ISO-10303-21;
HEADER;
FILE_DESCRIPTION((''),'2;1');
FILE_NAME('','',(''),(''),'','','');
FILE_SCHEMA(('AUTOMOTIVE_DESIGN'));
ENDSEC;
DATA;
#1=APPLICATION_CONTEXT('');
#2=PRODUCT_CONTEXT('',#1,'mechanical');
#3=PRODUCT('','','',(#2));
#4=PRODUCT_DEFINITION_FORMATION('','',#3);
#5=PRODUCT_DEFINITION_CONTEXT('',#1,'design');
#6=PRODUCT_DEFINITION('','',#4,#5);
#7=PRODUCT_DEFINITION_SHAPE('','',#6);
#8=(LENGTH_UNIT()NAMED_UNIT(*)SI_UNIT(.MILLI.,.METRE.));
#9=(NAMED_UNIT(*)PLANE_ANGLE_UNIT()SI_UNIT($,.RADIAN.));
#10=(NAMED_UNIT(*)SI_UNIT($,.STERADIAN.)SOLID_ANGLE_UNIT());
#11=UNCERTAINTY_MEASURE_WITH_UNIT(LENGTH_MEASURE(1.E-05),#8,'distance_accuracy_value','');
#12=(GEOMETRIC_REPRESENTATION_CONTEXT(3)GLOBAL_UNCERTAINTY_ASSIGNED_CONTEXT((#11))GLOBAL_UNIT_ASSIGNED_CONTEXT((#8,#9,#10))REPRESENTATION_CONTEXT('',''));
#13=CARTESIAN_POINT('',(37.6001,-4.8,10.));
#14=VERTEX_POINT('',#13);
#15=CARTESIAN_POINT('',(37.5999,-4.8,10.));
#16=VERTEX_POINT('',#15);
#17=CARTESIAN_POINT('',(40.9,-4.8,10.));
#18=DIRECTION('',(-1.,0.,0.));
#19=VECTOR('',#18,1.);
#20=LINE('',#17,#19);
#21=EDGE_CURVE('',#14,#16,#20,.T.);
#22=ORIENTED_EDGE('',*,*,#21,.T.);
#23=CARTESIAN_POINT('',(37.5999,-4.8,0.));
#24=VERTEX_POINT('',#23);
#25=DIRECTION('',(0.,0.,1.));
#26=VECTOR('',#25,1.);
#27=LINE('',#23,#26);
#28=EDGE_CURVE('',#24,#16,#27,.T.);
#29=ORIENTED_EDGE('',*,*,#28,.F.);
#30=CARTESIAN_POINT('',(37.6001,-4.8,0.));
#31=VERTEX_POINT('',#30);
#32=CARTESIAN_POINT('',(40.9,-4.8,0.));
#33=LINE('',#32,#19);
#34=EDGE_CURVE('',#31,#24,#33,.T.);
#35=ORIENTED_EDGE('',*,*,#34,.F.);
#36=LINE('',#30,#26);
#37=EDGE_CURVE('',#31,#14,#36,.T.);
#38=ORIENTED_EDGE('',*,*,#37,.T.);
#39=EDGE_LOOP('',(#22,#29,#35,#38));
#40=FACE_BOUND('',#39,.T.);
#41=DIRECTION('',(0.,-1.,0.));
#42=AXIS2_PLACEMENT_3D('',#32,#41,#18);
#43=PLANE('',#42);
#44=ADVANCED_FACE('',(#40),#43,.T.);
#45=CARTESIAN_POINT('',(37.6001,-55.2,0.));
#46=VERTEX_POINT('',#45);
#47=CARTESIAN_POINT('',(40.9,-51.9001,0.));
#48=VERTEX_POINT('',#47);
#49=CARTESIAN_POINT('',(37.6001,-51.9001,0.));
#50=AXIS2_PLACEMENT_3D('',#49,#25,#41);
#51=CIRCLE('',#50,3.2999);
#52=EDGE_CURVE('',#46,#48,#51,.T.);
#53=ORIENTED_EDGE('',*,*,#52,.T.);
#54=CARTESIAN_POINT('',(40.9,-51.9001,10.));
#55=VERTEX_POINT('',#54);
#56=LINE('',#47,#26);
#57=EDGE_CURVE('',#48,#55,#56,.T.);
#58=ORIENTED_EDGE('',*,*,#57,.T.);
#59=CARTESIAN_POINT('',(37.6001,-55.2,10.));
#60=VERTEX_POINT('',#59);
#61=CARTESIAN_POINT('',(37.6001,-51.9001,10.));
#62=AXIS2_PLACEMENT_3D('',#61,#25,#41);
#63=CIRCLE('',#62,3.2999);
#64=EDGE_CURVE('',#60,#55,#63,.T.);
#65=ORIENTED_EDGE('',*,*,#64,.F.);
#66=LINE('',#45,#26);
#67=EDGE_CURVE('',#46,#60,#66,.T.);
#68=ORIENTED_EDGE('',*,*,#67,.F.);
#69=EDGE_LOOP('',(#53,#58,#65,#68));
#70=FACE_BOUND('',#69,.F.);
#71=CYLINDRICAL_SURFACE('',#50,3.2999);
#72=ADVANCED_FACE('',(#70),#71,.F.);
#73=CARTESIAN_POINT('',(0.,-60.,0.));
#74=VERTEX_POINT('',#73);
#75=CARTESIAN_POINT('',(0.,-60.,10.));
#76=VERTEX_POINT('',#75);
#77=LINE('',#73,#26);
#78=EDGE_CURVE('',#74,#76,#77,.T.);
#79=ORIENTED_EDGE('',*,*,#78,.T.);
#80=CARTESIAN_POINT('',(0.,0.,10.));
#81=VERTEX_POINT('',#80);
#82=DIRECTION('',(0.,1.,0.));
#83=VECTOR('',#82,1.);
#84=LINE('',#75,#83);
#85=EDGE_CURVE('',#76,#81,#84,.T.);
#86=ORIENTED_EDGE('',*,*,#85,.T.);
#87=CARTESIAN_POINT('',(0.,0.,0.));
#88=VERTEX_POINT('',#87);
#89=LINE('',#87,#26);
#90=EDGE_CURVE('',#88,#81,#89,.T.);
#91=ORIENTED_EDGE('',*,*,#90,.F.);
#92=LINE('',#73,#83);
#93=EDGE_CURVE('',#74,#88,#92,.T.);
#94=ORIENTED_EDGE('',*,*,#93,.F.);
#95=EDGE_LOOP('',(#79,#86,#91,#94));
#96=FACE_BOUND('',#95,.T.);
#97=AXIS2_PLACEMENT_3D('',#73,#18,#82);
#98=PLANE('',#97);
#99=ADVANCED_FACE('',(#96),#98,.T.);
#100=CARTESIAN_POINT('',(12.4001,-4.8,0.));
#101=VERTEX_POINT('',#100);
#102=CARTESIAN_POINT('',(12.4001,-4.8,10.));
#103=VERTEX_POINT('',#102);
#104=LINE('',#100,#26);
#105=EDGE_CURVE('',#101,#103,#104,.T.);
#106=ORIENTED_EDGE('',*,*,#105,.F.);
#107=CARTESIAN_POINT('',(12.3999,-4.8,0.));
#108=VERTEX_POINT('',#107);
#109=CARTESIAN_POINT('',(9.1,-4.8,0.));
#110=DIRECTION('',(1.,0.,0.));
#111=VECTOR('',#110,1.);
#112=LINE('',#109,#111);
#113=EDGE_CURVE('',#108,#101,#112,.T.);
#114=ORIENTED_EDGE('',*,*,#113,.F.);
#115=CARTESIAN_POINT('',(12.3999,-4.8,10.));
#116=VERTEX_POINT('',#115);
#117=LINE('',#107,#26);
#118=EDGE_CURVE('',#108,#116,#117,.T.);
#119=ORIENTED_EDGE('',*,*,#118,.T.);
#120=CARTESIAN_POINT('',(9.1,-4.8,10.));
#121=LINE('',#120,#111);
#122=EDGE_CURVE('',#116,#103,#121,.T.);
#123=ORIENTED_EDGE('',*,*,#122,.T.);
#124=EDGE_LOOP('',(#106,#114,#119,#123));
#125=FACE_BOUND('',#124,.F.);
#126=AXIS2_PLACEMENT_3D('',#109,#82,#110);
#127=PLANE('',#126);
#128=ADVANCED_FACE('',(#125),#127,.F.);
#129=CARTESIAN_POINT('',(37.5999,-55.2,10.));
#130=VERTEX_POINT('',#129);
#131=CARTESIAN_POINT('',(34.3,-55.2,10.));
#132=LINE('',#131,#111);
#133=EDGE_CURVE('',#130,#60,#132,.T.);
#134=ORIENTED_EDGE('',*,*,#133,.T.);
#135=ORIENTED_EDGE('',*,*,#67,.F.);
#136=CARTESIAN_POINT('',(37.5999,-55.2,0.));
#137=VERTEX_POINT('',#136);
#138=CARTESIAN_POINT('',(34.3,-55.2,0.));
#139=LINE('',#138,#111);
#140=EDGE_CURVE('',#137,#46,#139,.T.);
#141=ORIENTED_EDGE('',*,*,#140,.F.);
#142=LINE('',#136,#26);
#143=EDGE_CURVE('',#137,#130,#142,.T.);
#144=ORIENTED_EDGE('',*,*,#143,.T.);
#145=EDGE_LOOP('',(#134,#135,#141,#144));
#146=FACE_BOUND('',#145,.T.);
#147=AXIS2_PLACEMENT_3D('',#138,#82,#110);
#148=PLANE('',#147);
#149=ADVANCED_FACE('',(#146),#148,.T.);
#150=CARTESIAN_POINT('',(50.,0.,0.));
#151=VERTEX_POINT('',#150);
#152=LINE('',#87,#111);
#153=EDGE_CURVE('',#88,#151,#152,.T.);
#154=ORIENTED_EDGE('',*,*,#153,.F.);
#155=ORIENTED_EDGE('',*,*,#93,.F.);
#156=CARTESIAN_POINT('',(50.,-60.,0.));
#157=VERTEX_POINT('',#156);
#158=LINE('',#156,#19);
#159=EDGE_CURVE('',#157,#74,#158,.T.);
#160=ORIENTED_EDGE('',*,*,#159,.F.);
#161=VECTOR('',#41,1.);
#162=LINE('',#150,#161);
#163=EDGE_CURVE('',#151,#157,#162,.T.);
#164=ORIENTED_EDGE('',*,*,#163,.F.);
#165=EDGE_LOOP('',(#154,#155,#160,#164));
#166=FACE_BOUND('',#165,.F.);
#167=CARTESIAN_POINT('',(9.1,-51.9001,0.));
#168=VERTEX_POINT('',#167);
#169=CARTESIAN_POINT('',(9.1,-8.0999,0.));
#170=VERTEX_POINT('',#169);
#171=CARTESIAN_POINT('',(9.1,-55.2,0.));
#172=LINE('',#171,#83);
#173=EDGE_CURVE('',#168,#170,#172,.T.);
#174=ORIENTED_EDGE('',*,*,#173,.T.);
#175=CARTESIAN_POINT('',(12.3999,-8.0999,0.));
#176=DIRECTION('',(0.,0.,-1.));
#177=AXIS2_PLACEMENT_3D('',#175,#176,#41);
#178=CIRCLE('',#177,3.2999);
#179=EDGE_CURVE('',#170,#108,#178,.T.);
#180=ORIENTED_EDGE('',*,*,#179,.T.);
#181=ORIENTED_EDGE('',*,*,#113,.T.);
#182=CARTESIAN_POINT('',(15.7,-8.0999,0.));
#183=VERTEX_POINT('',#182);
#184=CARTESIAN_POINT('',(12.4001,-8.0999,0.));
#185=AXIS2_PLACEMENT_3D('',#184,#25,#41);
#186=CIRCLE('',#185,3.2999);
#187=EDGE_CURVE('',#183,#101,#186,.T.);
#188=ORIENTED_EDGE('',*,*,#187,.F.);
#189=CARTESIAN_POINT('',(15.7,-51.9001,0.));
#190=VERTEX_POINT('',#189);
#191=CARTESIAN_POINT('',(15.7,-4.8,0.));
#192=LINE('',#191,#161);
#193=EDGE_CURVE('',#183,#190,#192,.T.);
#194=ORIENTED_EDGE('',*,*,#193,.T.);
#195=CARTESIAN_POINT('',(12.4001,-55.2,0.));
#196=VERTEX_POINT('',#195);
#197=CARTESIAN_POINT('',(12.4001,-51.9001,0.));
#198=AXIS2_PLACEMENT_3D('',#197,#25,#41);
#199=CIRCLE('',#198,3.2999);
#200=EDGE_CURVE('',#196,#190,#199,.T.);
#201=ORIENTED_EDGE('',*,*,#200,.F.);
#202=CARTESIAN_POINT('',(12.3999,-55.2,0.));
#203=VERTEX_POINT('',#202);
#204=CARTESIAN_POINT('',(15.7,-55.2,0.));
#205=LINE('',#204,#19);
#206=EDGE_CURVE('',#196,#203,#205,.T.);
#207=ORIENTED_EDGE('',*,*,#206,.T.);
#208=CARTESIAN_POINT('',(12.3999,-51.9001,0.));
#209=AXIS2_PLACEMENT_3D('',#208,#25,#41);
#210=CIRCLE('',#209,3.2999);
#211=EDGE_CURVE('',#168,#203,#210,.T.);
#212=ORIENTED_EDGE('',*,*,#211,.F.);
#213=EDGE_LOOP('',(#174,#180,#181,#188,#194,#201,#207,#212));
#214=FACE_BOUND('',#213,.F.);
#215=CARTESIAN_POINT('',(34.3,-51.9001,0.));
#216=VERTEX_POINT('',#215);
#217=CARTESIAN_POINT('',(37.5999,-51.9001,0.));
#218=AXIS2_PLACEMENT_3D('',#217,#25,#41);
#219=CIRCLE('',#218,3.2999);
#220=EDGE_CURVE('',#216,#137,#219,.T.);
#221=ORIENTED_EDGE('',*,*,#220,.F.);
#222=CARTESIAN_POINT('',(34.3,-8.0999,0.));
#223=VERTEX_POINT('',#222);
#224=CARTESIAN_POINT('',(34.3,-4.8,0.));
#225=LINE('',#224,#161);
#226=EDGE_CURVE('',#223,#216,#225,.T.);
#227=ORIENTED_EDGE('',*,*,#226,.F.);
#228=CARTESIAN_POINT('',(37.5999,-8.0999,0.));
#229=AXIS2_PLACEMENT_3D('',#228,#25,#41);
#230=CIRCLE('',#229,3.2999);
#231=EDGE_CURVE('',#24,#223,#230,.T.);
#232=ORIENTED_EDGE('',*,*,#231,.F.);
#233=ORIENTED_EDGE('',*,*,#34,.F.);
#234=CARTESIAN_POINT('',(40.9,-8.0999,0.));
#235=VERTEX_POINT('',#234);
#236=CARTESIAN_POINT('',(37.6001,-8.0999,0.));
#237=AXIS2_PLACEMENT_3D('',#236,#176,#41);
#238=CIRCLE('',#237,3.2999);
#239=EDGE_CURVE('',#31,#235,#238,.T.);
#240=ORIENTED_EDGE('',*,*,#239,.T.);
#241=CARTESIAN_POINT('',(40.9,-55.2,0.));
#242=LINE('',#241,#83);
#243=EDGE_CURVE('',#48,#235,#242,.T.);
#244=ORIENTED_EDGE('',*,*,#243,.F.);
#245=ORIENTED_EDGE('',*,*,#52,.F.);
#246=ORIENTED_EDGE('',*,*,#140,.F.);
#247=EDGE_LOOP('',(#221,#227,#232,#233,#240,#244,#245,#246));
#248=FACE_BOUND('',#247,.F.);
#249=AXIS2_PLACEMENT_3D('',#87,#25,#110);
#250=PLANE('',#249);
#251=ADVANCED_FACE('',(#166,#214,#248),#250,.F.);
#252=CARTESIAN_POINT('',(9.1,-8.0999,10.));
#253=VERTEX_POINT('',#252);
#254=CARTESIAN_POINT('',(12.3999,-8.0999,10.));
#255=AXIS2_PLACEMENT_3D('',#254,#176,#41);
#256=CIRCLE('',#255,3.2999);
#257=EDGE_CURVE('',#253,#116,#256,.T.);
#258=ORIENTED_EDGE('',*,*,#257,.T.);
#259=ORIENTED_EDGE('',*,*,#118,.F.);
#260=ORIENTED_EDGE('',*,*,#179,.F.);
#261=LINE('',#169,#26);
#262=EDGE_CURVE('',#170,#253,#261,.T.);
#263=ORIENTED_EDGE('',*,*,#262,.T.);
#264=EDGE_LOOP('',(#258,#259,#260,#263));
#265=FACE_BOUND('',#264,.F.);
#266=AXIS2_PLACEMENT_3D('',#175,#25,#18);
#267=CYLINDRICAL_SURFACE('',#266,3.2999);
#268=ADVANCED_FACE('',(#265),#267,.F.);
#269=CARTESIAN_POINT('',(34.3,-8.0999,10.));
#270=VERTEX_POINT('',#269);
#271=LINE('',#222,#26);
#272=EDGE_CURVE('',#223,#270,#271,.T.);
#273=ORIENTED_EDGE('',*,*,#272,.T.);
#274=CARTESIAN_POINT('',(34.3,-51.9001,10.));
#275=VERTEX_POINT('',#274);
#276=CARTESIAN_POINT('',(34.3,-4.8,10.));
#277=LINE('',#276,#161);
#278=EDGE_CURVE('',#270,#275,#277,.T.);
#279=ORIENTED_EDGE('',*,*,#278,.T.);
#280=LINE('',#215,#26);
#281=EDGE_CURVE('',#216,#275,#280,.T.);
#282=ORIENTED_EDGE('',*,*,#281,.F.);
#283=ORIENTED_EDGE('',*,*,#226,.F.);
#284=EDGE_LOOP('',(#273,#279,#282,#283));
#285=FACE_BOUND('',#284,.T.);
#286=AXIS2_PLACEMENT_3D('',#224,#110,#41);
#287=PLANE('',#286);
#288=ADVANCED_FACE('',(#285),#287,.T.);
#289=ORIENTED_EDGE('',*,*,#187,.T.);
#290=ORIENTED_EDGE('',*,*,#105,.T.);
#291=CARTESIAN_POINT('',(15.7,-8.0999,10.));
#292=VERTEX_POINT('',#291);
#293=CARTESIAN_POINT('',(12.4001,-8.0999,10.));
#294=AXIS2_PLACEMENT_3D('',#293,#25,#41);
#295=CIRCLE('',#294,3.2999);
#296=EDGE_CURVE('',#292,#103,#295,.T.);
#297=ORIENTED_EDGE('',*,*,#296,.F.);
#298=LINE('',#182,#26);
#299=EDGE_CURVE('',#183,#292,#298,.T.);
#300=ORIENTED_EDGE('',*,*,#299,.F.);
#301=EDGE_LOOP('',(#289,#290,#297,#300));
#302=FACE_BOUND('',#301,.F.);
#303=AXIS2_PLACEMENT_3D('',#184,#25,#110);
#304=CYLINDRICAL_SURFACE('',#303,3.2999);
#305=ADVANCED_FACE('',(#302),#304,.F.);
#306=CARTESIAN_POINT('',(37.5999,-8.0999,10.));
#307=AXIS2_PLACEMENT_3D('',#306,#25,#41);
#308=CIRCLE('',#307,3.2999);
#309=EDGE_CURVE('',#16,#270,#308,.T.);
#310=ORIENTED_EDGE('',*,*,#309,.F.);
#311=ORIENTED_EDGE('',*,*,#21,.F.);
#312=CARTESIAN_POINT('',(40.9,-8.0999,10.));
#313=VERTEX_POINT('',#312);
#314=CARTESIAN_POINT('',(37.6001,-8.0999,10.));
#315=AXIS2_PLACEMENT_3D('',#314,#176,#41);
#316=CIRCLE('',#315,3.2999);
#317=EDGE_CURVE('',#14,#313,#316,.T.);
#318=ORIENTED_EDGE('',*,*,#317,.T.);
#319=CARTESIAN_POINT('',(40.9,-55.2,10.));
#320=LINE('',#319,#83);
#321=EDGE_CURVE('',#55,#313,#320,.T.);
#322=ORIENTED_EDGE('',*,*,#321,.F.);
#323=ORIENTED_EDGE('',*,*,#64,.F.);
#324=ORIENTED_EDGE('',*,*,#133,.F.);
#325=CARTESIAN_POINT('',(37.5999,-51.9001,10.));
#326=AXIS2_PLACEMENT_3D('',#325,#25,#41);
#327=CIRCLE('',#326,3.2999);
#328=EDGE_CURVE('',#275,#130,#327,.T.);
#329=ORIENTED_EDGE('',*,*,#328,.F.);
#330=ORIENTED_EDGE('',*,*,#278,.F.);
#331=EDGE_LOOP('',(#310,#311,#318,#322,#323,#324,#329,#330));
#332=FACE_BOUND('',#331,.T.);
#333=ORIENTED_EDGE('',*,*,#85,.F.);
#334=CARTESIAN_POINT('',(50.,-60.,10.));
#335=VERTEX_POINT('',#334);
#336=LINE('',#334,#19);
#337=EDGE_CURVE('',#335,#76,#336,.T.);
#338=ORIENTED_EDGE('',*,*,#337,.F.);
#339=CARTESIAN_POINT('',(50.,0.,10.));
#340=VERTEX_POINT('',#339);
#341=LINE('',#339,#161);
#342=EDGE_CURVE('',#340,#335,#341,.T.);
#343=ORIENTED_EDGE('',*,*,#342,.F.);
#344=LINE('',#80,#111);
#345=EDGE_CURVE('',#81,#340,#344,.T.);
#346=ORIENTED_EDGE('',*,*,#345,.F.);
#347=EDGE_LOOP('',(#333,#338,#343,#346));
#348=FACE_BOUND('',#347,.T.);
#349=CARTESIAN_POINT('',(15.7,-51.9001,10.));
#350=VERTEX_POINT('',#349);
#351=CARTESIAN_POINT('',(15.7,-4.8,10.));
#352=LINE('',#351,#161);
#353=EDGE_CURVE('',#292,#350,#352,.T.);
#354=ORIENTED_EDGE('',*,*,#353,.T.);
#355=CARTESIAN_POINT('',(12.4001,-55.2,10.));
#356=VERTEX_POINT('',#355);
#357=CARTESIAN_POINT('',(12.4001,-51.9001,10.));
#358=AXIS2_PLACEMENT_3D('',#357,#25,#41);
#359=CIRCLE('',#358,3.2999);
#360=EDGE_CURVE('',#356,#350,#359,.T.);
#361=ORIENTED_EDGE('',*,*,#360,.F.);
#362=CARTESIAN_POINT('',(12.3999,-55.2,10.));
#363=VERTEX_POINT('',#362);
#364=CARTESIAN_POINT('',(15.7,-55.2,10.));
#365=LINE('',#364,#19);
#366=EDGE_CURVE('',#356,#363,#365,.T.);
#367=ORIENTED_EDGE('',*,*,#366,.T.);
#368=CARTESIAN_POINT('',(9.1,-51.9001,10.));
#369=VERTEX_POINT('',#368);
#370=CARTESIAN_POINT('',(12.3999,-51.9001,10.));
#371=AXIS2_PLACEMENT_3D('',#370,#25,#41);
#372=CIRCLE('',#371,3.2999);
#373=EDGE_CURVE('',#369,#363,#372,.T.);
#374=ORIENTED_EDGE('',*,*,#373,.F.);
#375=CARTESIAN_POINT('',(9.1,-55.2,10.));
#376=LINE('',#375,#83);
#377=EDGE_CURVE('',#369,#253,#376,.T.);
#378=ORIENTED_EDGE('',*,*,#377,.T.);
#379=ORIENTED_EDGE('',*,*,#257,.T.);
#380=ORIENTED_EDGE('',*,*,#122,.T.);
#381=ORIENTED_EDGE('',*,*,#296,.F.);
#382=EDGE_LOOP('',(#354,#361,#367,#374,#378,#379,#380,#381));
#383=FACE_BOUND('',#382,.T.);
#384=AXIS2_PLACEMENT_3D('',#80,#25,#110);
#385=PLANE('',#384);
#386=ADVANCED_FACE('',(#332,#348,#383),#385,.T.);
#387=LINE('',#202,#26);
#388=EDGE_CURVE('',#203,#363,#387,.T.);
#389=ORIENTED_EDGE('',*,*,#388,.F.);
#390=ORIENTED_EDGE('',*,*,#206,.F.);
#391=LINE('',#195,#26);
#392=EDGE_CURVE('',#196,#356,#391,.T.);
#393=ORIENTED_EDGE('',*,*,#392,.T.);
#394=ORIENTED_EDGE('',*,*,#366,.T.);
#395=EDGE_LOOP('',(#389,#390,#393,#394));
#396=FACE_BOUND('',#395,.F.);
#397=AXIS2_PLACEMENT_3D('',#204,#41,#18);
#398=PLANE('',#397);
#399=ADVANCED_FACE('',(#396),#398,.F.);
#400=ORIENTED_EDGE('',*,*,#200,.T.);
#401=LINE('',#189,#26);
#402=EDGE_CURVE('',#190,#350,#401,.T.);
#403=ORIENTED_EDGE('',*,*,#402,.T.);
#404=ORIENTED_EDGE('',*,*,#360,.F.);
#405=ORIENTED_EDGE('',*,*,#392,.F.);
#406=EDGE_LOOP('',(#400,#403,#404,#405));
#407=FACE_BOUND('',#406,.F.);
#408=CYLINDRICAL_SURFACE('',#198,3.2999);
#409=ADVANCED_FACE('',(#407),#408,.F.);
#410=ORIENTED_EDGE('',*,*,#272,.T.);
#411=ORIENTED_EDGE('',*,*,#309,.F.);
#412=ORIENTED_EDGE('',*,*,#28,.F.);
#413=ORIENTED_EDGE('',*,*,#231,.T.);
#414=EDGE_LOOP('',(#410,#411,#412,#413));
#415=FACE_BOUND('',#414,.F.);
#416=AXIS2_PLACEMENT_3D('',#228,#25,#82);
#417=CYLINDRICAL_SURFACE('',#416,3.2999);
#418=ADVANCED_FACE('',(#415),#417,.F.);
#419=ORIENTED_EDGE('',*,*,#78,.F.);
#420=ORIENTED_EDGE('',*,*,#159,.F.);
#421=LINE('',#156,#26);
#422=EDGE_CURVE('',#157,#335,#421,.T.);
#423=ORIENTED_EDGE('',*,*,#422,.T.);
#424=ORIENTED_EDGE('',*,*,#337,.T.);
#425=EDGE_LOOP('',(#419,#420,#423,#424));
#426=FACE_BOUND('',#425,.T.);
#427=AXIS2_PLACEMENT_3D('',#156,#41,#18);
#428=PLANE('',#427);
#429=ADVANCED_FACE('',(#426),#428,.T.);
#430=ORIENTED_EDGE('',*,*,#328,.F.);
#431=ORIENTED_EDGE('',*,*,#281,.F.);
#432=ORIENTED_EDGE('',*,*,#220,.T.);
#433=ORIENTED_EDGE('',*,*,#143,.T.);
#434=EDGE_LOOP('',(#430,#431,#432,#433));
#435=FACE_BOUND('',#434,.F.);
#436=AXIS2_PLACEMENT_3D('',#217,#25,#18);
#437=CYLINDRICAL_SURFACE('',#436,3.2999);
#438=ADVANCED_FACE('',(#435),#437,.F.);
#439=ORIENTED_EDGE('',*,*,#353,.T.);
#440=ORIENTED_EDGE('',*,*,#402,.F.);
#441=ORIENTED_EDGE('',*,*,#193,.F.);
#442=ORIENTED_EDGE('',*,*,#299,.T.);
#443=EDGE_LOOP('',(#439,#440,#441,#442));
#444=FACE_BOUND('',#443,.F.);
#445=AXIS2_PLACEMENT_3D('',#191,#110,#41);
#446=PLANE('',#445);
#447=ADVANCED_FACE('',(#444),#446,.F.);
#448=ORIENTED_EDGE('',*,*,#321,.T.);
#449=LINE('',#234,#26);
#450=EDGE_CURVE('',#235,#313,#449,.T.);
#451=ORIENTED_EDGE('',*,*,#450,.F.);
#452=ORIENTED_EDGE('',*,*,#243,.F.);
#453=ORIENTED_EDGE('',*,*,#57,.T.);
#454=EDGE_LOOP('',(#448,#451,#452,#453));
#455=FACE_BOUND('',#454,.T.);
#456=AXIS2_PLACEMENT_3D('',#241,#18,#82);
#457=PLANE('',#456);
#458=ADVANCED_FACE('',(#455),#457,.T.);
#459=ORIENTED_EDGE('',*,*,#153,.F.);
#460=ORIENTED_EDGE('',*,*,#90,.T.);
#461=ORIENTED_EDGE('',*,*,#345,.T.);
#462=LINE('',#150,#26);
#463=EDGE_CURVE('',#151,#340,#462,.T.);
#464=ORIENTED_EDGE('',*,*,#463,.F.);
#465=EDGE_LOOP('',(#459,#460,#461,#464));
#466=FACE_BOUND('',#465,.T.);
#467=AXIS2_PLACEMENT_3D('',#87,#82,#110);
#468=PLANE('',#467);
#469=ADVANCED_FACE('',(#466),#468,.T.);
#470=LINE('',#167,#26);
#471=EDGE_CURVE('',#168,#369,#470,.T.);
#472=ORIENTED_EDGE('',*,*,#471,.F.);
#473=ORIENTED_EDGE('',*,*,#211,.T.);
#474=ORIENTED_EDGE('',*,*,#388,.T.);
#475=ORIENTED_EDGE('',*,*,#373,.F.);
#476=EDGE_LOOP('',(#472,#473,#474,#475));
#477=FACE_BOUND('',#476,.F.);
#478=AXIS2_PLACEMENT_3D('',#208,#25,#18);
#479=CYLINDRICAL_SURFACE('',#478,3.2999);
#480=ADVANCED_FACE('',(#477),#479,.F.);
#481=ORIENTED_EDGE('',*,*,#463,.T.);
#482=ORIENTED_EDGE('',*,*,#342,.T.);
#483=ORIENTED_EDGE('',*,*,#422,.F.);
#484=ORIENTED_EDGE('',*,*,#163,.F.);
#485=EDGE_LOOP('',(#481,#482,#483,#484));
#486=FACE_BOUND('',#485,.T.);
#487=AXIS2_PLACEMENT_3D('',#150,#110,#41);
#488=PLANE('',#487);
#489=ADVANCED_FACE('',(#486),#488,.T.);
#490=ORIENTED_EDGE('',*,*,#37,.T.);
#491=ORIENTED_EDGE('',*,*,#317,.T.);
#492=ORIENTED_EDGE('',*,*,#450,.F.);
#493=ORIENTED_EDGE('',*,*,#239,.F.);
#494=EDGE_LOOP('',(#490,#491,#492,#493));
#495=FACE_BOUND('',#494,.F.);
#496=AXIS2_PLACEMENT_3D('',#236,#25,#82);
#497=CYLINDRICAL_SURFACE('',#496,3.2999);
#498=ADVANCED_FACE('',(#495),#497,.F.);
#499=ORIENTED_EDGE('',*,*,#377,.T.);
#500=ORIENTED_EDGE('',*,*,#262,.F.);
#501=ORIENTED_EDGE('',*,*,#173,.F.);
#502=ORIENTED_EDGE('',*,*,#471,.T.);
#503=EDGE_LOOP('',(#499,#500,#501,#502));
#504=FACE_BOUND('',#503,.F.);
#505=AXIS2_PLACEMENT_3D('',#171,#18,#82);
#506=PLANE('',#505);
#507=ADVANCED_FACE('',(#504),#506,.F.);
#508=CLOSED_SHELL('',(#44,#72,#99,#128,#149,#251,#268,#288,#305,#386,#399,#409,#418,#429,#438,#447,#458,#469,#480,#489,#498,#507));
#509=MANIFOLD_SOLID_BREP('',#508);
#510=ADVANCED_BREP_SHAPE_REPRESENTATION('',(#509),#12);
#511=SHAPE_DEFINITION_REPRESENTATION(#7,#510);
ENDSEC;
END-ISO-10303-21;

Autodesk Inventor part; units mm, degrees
ref_plane "YZ Plane" through (0, 0, 0) normal (1, 0, 0) x (0, 1, 0)
ref_plane "XZ Plane" through (0, 0, 0) normal (0, 1, 0) x (-1, 0, 0)
ref_plane "XY Plane" through (0, 0, 0) normal (0, 0, 1) x (1, 0, 0)
sketch "Skizze3" plane through (0, 0, 0) normal (0, 0, 1) x (1, 0, 0)
  line L0 (0, 0) -> (50, 0)
  line L1 (0, 0) -> (50, 0)
  line L2 (50, 0) -> (50, -60)
  line L3 (50, -60) -> (0, -60)
  line L4 (0, -60) -> (0, 0)
  line L5 (40.9, -4.8) -> (34.3, -4.8)
  line L6 (34.3, -4.8) -> (34.3, -55.2)
  line L7 (34.3, -55.2) -> (40.9, -55.2)
  line L8 (40.9, -55.2) -> (40.9, -4.8)
  line L9 (9.1, -4.8) -> (15.7, -4.8)
  line L10 (15.7, -4.8) -> (15.7, -55.2)
  line L11 (15.7, -55.2) -> (9.1, -55.2)
  line L12 (9.1, -55.2) -> (9.1, -4.8)
  dimension "d20" = 50
  dimension "d21" = 60
  dimension "d27" = 6.6
  dimension "d28" = 6.6
extrude "Extrusion6" add sketch "Skizze3" along normal blind 10
fillet "Rundung5" radius 3.3 8 edges at (34.3, -4.8, 5) (9.1, -4.8, 5) (40.9, -4.8, 5) (15.7, -4.8, 5) (34.3, -55.2, 5) (9.1, -55.2, 5) (40.9, -55.2, 5) (15.7, -55.2, 5)
properties part number "Fuß Steher"
